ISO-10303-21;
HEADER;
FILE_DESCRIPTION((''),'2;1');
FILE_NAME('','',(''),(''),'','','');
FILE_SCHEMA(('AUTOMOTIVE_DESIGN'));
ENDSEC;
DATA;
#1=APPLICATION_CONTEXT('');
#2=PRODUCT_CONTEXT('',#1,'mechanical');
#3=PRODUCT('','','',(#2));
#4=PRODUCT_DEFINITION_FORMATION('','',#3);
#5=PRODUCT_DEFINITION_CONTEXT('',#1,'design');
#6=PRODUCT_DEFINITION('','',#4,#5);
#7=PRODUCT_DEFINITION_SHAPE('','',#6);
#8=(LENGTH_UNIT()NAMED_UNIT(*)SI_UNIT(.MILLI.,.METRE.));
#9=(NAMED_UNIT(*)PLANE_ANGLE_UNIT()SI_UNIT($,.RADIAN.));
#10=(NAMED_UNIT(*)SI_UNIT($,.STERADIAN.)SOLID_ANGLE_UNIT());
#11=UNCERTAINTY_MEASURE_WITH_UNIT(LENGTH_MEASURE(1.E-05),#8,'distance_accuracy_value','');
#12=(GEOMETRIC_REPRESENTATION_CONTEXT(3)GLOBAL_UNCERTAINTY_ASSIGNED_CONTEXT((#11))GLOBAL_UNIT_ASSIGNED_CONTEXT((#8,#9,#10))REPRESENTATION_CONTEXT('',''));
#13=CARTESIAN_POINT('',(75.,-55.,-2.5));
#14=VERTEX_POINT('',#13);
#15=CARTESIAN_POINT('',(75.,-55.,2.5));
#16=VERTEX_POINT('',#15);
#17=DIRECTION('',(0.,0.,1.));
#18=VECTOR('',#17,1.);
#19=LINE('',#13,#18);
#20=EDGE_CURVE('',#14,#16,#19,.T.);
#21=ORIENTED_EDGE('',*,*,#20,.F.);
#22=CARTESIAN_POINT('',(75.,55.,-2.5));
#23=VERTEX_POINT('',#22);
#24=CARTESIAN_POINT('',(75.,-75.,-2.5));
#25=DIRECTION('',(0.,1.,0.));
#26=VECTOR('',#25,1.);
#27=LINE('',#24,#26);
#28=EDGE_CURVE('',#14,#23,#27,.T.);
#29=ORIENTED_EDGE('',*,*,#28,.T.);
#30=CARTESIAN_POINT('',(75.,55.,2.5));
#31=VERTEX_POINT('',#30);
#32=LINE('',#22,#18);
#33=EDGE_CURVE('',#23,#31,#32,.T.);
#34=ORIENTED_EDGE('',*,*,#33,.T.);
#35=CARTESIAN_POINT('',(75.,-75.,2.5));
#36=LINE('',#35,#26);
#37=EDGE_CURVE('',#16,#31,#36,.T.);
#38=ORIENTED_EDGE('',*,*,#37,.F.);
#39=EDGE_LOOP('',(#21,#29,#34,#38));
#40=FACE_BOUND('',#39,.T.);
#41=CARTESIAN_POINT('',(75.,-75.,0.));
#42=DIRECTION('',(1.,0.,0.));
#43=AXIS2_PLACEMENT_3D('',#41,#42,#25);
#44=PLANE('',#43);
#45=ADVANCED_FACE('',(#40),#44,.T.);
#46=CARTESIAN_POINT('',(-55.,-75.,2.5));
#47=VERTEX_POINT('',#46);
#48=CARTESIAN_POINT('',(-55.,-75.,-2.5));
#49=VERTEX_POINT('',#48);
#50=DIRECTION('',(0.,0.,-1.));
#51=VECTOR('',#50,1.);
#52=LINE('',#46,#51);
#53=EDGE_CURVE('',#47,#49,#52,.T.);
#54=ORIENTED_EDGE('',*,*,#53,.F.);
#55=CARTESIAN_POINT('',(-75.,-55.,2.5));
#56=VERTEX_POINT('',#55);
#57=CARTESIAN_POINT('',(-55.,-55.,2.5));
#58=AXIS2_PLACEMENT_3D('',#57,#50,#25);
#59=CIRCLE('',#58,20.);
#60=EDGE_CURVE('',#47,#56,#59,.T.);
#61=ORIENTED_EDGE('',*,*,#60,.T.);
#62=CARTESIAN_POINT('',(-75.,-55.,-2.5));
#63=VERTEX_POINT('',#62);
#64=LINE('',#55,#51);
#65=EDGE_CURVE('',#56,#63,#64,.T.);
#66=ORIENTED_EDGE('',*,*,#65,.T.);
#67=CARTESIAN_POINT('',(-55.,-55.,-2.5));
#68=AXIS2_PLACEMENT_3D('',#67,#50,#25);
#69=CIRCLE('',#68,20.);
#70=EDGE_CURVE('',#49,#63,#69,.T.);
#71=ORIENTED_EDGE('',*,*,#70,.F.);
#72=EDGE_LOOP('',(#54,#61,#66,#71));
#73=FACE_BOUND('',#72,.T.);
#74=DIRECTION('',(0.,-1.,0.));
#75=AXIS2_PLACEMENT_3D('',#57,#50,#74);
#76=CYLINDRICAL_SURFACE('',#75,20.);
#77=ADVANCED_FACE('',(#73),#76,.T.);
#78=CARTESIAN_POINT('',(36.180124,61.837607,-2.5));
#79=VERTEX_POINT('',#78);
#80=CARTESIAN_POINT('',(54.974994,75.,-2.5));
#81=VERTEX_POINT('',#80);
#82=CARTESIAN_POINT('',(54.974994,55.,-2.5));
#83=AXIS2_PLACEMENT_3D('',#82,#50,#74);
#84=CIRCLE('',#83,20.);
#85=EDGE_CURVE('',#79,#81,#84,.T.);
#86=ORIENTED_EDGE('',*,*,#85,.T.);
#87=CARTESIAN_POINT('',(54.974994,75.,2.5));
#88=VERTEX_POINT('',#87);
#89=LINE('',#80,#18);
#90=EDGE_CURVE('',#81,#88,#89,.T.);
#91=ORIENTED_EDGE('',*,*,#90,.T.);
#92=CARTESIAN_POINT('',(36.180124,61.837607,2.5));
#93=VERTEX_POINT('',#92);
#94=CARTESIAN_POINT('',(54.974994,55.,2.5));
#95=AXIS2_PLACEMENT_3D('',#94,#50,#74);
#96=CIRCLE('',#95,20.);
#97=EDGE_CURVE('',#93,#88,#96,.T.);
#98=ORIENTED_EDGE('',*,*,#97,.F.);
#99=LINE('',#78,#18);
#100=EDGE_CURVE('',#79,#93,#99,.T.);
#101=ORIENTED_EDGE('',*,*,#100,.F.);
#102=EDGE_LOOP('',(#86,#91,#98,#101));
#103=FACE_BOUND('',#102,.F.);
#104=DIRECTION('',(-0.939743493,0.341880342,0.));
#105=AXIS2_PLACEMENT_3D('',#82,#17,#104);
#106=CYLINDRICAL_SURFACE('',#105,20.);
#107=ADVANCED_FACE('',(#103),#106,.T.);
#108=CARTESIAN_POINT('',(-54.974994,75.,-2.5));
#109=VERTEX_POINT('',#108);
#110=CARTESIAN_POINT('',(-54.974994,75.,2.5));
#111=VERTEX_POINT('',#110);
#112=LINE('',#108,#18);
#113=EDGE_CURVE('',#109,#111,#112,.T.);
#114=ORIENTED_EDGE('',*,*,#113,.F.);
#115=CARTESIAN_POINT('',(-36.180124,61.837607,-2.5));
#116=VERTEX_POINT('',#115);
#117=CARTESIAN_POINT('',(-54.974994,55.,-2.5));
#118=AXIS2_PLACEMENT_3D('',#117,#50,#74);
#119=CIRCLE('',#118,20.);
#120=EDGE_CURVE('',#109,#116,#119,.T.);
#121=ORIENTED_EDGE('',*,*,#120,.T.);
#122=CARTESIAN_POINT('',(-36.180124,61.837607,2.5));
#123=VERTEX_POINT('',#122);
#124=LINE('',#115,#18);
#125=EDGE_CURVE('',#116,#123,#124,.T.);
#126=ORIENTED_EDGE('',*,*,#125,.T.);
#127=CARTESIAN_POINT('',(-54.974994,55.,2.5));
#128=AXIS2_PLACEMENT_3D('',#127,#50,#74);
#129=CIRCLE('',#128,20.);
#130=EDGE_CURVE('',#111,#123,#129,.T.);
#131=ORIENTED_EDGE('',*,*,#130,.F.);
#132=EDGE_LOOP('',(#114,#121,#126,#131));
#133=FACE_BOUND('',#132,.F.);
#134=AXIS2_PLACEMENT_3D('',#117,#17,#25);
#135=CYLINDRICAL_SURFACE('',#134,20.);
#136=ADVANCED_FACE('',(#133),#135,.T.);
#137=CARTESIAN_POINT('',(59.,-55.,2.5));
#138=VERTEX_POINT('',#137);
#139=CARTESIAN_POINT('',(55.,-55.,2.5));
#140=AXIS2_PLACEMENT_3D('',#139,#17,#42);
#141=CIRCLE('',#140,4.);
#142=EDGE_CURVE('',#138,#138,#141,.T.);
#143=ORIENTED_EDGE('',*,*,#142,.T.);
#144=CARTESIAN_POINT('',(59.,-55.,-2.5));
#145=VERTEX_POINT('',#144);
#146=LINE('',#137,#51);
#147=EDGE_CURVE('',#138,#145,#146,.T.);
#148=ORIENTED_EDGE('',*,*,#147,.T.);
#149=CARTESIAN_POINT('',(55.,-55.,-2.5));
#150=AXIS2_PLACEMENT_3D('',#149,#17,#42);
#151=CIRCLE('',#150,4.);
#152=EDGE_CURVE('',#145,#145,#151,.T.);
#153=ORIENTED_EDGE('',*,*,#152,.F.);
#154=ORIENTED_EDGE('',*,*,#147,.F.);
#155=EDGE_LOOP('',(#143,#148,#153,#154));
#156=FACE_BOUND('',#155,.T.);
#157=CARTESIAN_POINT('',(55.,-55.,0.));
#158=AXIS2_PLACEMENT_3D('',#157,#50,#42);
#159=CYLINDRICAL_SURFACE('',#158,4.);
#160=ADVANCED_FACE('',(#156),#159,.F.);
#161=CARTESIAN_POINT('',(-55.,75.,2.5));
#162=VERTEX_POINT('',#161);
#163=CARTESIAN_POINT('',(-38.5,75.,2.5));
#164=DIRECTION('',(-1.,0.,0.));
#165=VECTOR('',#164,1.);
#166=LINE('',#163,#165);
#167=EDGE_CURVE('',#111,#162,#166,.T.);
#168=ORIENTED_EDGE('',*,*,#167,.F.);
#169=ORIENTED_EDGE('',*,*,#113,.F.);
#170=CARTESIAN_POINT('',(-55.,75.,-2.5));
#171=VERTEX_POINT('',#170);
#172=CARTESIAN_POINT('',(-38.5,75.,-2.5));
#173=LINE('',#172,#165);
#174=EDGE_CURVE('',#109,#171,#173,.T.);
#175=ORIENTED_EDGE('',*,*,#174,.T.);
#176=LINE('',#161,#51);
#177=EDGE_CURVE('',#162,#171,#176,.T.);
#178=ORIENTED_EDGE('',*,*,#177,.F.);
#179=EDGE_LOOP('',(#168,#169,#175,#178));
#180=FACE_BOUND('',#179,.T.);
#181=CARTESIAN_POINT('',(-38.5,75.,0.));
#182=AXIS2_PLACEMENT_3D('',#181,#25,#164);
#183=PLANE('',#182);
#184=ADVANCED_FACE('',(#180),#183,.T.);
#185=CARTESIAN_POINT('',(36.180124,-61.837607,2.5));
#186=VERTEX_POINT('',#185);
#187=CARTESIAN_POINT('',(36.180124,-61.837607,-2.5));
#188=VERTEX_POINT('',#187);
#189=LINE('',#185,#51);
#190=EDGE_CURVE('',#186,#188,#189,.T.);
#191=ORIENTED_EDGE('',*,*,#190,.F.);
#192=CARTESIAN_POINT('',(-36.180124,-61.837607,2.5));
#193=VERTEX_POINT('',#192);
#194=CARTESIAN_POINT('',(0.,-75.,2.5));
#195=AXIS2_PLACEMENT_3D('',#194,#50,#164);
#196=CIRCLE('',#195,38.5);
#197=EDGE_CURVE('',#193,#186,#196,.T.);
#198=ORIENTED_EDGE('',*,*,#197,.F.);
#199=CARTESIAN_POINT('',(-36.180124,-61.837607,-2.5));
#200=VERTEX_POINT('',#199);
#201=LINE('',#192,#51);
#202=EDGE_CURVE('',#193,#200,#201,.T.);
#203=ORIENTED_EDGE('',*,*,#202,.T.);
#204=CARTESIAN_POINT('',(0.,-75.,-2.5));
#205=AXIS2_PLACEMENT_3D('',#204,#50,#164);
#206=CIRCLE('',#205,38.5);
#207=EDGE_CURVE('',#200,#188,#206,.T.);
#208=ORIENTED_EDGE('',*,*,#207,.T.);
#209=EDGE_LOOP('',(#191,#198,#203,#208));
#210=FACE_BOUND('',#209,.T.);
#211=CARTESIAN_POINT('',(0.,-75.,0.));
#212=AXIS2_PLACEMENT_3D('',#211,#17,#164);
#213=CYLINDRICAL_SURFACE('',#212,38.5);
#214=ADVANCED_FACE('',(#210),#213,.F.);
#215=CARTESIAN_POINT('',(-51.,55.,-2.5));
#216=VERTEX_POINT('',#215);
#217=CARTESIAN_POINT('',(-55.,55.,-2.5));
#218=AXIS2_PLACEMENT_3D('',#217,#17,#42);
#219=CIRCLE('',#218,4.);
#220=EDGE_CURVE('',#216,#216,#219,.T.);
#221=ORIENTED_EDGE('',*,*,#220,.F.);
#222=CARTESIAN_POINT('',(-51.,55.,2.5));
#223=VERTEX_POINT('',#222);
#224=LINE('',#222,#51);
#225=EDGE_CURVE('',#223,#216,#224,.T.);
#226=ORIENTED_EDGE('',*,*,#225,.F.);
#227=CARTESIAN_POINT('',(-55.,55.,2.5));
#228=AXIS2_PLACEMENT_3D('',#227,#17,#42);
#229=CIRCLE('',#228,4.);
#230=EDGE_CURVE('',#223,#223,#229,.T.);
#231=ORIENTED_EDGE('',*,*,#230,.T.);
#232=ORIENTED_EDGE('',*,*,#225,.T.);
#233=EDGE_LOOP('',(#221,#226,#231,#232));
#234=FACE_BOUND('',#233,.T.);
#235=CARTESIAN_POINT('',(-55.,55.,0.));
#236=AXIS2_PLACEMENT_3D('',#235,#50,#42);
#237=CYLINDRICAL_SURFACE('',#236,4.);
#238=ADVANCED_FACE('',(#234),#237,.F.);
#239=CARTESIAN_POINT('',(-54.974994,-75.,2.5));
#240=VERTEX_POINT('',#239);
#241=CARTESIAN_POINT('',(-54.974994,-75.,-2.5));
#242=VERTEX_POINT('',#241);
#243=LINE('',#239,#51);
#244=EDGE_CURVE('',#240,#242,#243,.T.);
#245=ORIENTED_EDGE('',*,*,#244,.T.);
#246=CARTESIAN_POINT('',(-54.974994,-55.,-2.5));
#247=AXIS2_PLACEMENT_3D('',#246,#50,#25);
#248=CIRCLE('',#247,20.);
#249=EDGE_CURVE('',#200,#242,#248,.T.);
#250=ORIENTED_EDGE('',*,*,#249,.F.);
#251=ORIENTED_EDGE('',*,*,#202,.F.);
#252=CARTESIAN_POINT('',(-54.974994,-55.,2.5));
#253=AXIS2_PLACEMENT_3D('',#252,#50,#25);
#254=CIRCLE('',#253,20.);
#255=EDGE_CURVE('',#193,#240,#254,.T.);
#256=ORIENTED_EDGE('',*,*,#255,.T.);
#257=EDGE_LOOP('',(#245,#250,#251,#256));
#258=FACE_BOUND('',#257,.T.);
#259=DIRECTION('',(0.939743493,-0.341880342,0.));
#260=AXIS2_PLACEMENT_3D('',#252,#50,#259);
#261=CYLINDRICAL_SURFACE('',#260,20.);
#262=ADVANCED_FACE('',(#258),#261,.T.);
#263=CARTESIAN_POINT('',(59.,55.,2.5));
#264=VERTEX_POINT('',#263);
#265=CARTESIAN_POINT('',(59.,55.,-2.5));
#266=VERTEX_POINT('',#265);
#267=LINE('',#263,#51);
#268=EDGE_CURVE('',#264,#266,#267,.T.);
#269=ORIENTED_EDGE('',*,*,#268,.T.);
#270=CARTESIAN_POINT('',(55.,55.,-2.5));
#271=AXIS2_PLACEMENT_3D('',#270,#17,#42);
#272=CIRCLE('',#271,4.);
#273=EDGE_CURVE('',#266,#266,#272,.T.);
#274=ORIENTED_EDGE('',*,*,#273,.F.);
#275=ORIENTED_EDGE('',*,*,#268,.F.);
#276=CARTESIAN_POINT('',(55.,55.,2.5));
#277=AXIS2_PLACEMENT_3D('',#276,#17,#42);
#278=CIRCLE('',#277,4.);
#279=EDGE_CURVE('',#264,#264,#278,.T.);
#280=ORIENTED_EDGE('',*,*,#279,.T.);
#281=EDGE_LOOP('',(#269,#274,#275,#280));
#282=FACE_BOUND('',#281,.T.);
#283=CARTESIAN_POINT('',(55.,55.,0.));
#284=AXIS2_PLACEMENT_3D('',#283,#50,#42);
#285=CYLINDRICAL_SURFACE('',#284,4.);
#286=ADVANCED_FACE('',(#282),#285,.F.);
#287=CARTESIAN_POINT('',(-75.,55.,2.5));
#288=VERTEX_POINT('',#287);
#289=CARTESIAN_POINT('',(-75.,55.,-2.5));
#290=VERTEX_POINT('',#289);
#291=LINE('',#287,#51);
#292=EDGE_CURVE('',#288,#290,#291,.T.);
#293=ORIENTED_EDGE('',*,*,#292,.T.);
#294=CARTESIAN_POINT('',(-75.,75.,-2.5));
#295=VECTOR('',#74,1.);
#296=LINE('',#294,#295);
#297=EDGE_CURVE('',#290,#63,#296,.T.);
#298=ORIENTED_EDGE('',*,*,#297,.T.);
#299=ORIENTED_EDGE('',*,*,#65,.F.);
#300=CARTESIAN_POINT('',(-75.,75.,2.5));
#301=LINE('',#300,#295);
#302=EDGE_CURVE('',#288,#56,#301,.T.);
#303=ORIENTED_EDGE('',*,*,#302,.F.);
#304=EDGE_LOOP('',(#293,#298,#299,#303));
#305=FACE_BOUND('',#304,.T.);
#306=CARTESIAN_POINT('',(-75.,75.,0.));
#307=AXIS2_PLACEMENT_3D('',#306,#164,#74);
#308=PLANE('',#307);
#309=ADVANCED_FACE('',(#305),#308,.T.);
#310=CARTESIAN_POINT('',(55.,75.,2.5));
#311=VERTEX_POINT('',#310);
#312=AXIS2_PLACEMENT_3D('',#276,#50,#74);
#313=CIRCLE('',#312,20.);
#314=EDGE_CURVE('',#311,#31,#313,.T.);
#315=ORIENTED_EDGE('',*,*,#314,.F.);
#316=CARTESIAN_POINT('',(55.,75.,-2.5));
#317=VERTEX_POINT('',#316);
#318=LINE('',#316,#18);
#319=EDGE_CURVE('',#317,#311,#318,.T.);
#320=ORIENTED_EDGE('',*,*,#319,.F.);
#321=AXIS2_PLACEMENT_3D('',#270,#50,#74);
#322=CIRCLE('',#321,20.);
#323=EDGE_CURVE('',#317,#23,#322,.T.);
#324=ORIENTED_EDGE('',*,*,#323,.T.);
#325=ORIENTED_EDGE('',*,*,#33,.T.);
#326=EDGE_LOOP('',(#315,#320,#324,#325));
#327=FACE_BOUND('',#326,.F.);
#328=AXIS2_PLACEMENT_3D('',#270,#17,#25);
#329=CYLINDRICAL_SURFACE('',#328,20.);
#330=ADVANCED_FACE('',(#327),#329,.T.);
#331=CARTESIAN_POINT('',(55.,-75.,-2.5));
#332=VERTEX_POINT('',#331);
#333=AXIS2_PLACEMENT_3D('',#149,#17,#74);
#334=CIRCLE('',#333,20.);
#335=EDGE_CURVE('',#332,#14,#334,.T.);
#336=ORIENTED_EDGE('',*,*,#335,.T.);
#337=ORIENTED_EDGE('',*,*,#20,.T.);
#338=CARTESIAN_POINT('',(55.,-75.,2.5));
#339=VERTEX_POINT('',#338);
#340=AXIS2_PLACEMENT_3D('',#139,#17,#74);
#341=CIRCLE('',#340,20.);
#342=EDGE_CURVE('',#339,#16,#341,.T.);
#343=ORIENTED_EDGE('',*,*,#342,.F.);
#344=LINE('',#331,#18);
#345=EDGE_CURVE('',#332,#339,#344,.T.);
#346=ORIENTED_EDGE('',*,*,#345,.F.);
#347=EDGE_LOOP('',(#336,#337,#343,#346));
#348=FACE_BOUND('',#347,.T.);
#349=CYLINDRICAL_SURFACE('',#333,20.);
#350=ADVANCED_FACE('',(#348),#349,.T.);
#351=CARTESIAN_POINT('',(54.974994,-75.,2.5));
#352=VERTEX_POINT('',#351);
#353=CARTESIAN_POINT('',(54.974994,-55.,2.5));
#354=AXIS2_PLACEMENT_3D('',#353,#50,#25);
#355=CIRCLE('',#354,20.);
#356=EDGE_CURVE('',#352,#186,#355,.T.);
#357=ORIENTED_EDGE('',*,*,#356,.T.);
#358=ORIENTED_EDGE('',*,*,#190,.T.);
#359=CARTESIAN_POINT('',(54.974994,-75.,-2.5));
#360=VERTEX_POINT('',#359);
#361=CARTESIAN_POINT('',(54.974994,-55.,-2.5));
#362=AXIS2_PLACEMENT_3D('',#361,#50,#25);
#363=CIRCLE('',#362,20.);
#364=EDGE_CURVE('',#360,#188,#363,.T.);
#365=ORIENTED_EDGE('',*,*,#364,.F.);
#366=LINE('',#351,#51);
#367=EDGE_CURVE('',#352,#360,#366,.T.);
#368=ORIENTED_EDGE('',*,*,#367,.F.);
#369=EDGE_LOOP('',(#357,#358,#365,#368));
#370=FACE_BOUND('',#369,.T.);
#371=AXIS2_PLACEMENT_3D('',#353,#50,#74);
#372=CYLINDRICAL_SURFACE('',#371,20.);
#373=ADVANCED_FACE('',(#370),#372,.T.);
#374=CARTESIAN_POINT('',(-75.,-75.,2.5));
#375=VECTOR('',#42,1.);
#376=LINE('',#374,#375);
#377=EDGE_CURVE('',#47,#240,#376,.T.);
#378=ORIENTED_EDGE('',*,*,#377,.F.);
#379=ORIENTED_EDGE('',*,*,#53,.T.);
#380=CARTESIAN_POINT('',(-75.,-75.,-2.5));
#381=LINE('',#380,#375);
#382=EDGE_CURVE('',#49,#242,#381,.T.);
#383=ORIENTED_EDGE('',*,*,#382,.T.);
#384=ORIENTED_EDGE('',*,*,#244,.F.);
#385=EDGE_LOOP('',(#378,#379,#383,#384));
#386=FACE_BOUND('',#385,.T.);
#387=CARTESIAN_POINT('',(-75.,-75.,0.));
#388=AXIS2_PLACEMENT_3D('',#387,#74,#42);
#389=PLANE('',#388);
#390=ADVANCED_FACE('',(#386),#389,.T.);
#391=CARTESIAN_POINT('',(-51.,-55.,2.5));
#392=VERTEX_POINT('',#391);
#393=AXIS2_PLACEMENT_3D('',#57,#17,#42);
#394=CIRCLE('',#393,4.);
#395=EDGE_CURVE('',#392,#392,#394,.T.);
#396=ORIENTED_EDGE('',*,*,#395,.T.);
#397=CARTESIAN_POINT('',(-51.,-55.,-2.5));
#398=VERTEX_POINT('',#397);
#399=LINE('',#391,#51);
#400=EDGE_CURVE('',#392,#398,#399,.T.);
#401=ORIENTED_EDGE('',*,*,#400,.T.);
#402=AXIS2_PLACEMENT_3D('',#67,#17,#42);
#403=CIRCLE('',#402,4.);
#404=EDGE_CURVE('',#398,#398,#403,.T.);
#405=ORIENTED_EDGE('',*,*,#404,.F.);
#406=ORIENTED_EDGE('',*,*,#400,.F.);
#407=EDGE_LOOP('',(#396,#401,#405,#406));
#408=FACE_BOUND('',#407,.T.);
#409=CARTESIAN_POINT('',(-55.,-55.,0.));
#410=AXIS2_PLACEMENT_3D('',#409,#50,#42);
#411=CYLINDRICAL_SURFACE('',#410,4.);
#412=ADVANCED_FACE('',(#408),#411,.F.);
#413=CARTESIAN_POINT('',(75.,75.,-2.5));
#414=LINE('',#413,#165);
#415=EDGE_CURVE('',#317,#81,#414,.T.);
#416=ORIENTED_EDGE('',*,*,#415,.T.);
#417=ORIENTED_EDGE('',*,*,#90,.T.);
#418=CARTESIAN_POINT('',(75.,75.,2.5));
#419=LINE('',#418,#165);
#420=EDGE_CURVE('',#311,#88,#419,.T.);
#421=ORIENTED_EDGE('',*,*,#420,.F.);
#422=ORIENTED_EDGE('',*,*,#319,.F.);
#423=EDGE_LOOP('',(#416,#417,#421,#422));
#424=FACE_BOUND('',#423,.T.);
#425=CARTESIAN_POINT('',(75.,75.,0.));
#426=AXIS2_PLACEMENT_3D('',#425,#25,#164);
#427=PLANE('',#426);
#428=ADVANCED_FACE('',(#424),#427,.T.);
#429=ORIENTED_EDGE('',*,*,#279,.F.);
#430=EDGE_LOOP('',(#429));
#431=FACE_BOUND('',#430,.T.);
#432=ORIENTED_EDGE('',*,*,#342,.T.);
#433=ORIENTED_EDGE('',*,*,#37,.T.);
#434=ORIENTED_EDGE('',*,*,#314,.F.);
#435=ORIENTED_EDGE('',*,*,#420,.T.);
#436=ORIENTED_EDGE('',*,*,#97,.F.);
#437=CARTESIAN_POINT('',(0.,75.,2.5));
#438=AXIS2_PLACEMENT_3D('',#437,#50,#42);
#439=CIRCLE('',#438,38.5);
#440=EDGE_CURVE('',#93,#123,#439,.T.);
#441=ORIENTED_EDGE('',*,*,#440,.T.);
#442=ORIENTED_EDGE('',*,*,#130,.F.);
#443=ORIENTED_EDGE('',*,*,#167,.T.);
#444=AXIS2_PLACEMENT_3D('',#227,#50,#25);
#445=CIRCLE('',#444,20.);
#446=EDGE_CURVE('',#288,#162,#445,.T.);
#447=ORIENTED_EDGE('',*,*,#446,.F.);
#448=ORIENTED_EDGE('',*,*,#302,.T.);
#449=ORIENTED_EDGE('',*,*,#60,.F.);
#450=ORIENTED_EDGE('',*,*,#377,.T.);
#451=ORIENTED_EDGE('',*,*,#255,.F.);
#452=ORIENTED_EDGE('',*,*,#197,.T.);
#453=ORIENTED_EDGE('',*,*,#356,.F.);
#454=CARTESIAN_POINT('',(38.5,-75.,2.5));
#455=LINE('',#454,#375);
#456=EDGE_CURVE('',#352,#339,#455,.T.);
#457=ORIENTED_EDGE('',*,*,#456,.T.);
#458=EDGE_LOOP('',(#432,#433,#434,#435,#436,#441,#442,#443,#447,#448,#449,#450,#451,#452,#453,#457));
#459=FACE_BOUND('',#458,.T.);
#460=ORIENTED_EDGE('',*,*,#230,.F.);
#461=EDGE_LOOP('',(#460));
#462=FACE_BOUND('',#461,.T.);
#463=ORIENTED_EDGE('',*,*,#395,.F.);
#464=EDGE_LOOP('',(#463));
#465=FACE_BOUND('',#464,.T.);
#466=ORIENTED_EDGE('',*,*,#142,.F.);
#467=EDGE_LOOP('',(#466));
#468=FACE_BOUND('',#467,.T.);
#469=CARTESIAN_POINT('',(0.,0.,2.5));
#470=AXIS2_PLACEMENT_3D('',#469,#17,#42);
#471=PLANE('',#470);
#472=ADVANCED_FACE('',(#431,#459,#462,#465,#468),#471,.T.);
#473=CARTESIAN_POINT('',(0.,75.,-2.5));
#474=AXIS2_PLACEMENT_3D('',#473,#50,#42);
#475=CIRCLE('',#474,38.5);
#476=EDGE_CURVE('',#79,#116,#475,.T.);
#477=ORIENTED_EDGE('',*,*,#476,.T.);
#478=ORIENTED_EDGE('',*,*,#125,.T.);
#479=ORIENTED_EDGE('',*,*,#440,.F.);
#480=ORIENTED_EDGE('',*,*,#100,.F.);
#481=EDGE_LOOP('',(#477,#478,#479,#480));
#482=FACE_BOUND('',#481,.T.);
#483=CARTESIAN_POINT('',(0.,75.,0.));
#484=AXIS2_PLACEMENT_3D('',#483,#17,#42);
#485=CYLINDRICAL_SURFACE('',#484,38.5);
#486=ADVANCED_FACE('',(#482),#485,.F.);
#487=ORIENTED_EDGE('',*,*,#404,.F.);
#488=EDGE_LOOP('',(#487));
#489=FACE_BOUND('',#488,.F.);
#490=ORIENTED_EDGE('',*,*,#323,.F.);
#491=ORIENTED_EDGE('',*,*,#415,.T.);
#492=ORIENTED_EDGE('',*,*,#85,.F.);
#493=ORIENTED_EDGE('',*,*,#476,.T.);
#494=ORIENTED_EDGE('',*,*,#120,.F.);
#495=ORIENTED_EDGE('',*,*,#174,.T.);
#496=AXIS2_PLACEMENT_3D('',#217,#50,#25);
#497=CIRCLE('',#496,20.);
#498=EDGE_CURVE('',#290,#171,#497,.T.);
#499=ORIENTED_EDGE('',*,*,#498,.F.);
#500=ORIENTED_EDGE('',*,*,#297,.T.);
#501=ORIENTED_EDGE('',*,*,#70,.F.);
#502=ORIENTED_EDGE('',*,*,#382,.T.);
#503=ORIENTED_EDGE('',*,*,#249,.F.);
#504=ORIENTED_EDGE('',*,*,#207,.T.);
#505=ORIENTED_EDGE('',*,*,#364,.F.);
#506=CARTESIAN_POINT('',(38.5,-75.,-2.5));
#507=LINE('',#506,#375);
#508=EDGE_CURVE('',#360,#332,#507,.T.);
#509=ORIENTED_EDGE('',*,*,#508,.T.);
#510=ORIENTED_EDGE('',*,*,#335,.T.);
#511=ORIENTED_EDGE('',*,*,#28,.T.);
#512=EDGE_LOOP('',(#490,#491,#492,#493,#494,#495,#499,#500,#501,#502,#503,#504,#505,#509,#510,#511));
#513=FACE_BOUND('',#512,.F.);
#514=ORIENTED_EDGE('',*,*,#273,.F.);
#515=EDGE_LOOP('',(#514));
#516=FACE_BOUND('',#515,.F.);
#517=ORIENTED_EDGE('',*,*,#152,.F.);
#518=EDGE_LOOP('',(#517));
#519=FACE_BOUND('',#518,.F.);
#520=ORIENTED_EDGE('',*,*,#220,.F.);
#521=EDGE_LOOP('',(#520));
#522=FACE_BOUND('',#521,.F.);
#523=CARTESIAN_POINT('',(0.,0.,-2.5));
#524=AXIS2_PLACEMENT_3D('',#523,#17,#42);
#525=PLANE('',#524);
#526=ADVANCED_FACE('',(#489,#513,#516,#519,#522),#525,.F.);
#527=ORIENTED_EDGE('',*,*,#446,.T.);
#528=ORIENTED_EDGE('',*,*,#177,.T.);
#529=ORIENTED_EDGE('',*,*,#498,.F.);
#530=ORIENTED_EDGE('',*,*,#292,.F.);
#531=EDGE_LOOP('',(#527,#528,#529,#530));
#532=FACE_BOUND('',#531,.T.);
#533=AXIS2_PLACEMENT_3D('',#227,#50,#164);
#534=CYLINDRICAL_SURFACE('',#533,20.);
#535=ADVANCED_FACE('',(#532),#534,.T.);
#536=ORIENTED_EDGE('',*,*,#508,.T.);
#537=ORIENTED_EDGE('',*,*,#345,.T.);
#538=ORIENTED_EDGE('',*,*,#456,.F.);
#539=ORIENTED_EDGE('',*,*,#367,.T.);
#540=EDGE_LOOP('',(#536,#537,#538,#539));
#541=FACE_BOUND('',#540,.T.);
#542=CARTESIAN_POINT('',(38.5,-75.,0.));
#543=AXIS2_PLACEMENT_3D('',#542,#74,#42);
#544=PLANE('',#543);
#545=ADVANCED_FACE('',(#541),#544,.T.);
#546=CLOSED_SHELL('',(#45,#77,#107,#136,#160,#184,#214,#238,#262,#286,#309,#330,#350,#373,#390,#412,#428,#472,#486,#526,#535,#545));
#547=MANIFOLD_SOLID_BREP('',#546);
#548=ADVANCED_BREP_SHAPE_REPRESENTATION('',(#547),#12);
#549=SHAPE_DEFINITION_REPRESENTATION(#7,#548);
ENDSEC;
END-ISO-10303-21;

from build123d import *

# Parameters (mm, degrees)
F0_R     = 4
F1_DEPTH = 2.5
F2_R     = 20


with BuildPart() as f1:
    # F0 (on Top) → F1 (new body, symmetric)
    with BuildSketch(Plane.XY):
        with BuildLine():
            Line((38.5, -75), (75, -75))
            Line((75, -75), (75, 75))
            Line((75, 75), (38.5, 75))
            ThreePointArc((38.5, 75), (0, 36.5), (-38.5, 75))
            Line((-38.5, 75), (-75, 75))
            Line((-75, 75), (-75, -75))
            Line((-75, -75), (-38.5, -75))
            ThreePointArc((-38.5, -75), (0, -36.5), (38.5, -75))
        make_face()
        with Locations((-55, -55)):
            Circle(F0_R, mode=Mode.SUBTRACT)
        with Locations((55, -55)):
            Circle(F0_R, mode=Mode.SUBTRACT)
        with Locations((-55, 55)):
            Circle(F0_R, mode=Mode.SUBTRACT)
        with Locations((55, 55)):
            Circle(F0_R, mode=Mode.SUBTRACT)
    extrude(amount=F1_DEPTH, both=True)

    # F2
    f2_edges = [f1.edges().sort_by_distance(p)[0] for p in [
        (75, -75, 0),
        (75, 75, 0),
        (-75, 75, 0),
        (-38.5, 75, 0),
        (38.5, 75, 0),
        (-38.5, -75, 0),
        (38.5, -75, 0),
        (-75, -75, 0),
    ]]
    fillet(f2_edges, radius=F2_R)


solid = f1.part
